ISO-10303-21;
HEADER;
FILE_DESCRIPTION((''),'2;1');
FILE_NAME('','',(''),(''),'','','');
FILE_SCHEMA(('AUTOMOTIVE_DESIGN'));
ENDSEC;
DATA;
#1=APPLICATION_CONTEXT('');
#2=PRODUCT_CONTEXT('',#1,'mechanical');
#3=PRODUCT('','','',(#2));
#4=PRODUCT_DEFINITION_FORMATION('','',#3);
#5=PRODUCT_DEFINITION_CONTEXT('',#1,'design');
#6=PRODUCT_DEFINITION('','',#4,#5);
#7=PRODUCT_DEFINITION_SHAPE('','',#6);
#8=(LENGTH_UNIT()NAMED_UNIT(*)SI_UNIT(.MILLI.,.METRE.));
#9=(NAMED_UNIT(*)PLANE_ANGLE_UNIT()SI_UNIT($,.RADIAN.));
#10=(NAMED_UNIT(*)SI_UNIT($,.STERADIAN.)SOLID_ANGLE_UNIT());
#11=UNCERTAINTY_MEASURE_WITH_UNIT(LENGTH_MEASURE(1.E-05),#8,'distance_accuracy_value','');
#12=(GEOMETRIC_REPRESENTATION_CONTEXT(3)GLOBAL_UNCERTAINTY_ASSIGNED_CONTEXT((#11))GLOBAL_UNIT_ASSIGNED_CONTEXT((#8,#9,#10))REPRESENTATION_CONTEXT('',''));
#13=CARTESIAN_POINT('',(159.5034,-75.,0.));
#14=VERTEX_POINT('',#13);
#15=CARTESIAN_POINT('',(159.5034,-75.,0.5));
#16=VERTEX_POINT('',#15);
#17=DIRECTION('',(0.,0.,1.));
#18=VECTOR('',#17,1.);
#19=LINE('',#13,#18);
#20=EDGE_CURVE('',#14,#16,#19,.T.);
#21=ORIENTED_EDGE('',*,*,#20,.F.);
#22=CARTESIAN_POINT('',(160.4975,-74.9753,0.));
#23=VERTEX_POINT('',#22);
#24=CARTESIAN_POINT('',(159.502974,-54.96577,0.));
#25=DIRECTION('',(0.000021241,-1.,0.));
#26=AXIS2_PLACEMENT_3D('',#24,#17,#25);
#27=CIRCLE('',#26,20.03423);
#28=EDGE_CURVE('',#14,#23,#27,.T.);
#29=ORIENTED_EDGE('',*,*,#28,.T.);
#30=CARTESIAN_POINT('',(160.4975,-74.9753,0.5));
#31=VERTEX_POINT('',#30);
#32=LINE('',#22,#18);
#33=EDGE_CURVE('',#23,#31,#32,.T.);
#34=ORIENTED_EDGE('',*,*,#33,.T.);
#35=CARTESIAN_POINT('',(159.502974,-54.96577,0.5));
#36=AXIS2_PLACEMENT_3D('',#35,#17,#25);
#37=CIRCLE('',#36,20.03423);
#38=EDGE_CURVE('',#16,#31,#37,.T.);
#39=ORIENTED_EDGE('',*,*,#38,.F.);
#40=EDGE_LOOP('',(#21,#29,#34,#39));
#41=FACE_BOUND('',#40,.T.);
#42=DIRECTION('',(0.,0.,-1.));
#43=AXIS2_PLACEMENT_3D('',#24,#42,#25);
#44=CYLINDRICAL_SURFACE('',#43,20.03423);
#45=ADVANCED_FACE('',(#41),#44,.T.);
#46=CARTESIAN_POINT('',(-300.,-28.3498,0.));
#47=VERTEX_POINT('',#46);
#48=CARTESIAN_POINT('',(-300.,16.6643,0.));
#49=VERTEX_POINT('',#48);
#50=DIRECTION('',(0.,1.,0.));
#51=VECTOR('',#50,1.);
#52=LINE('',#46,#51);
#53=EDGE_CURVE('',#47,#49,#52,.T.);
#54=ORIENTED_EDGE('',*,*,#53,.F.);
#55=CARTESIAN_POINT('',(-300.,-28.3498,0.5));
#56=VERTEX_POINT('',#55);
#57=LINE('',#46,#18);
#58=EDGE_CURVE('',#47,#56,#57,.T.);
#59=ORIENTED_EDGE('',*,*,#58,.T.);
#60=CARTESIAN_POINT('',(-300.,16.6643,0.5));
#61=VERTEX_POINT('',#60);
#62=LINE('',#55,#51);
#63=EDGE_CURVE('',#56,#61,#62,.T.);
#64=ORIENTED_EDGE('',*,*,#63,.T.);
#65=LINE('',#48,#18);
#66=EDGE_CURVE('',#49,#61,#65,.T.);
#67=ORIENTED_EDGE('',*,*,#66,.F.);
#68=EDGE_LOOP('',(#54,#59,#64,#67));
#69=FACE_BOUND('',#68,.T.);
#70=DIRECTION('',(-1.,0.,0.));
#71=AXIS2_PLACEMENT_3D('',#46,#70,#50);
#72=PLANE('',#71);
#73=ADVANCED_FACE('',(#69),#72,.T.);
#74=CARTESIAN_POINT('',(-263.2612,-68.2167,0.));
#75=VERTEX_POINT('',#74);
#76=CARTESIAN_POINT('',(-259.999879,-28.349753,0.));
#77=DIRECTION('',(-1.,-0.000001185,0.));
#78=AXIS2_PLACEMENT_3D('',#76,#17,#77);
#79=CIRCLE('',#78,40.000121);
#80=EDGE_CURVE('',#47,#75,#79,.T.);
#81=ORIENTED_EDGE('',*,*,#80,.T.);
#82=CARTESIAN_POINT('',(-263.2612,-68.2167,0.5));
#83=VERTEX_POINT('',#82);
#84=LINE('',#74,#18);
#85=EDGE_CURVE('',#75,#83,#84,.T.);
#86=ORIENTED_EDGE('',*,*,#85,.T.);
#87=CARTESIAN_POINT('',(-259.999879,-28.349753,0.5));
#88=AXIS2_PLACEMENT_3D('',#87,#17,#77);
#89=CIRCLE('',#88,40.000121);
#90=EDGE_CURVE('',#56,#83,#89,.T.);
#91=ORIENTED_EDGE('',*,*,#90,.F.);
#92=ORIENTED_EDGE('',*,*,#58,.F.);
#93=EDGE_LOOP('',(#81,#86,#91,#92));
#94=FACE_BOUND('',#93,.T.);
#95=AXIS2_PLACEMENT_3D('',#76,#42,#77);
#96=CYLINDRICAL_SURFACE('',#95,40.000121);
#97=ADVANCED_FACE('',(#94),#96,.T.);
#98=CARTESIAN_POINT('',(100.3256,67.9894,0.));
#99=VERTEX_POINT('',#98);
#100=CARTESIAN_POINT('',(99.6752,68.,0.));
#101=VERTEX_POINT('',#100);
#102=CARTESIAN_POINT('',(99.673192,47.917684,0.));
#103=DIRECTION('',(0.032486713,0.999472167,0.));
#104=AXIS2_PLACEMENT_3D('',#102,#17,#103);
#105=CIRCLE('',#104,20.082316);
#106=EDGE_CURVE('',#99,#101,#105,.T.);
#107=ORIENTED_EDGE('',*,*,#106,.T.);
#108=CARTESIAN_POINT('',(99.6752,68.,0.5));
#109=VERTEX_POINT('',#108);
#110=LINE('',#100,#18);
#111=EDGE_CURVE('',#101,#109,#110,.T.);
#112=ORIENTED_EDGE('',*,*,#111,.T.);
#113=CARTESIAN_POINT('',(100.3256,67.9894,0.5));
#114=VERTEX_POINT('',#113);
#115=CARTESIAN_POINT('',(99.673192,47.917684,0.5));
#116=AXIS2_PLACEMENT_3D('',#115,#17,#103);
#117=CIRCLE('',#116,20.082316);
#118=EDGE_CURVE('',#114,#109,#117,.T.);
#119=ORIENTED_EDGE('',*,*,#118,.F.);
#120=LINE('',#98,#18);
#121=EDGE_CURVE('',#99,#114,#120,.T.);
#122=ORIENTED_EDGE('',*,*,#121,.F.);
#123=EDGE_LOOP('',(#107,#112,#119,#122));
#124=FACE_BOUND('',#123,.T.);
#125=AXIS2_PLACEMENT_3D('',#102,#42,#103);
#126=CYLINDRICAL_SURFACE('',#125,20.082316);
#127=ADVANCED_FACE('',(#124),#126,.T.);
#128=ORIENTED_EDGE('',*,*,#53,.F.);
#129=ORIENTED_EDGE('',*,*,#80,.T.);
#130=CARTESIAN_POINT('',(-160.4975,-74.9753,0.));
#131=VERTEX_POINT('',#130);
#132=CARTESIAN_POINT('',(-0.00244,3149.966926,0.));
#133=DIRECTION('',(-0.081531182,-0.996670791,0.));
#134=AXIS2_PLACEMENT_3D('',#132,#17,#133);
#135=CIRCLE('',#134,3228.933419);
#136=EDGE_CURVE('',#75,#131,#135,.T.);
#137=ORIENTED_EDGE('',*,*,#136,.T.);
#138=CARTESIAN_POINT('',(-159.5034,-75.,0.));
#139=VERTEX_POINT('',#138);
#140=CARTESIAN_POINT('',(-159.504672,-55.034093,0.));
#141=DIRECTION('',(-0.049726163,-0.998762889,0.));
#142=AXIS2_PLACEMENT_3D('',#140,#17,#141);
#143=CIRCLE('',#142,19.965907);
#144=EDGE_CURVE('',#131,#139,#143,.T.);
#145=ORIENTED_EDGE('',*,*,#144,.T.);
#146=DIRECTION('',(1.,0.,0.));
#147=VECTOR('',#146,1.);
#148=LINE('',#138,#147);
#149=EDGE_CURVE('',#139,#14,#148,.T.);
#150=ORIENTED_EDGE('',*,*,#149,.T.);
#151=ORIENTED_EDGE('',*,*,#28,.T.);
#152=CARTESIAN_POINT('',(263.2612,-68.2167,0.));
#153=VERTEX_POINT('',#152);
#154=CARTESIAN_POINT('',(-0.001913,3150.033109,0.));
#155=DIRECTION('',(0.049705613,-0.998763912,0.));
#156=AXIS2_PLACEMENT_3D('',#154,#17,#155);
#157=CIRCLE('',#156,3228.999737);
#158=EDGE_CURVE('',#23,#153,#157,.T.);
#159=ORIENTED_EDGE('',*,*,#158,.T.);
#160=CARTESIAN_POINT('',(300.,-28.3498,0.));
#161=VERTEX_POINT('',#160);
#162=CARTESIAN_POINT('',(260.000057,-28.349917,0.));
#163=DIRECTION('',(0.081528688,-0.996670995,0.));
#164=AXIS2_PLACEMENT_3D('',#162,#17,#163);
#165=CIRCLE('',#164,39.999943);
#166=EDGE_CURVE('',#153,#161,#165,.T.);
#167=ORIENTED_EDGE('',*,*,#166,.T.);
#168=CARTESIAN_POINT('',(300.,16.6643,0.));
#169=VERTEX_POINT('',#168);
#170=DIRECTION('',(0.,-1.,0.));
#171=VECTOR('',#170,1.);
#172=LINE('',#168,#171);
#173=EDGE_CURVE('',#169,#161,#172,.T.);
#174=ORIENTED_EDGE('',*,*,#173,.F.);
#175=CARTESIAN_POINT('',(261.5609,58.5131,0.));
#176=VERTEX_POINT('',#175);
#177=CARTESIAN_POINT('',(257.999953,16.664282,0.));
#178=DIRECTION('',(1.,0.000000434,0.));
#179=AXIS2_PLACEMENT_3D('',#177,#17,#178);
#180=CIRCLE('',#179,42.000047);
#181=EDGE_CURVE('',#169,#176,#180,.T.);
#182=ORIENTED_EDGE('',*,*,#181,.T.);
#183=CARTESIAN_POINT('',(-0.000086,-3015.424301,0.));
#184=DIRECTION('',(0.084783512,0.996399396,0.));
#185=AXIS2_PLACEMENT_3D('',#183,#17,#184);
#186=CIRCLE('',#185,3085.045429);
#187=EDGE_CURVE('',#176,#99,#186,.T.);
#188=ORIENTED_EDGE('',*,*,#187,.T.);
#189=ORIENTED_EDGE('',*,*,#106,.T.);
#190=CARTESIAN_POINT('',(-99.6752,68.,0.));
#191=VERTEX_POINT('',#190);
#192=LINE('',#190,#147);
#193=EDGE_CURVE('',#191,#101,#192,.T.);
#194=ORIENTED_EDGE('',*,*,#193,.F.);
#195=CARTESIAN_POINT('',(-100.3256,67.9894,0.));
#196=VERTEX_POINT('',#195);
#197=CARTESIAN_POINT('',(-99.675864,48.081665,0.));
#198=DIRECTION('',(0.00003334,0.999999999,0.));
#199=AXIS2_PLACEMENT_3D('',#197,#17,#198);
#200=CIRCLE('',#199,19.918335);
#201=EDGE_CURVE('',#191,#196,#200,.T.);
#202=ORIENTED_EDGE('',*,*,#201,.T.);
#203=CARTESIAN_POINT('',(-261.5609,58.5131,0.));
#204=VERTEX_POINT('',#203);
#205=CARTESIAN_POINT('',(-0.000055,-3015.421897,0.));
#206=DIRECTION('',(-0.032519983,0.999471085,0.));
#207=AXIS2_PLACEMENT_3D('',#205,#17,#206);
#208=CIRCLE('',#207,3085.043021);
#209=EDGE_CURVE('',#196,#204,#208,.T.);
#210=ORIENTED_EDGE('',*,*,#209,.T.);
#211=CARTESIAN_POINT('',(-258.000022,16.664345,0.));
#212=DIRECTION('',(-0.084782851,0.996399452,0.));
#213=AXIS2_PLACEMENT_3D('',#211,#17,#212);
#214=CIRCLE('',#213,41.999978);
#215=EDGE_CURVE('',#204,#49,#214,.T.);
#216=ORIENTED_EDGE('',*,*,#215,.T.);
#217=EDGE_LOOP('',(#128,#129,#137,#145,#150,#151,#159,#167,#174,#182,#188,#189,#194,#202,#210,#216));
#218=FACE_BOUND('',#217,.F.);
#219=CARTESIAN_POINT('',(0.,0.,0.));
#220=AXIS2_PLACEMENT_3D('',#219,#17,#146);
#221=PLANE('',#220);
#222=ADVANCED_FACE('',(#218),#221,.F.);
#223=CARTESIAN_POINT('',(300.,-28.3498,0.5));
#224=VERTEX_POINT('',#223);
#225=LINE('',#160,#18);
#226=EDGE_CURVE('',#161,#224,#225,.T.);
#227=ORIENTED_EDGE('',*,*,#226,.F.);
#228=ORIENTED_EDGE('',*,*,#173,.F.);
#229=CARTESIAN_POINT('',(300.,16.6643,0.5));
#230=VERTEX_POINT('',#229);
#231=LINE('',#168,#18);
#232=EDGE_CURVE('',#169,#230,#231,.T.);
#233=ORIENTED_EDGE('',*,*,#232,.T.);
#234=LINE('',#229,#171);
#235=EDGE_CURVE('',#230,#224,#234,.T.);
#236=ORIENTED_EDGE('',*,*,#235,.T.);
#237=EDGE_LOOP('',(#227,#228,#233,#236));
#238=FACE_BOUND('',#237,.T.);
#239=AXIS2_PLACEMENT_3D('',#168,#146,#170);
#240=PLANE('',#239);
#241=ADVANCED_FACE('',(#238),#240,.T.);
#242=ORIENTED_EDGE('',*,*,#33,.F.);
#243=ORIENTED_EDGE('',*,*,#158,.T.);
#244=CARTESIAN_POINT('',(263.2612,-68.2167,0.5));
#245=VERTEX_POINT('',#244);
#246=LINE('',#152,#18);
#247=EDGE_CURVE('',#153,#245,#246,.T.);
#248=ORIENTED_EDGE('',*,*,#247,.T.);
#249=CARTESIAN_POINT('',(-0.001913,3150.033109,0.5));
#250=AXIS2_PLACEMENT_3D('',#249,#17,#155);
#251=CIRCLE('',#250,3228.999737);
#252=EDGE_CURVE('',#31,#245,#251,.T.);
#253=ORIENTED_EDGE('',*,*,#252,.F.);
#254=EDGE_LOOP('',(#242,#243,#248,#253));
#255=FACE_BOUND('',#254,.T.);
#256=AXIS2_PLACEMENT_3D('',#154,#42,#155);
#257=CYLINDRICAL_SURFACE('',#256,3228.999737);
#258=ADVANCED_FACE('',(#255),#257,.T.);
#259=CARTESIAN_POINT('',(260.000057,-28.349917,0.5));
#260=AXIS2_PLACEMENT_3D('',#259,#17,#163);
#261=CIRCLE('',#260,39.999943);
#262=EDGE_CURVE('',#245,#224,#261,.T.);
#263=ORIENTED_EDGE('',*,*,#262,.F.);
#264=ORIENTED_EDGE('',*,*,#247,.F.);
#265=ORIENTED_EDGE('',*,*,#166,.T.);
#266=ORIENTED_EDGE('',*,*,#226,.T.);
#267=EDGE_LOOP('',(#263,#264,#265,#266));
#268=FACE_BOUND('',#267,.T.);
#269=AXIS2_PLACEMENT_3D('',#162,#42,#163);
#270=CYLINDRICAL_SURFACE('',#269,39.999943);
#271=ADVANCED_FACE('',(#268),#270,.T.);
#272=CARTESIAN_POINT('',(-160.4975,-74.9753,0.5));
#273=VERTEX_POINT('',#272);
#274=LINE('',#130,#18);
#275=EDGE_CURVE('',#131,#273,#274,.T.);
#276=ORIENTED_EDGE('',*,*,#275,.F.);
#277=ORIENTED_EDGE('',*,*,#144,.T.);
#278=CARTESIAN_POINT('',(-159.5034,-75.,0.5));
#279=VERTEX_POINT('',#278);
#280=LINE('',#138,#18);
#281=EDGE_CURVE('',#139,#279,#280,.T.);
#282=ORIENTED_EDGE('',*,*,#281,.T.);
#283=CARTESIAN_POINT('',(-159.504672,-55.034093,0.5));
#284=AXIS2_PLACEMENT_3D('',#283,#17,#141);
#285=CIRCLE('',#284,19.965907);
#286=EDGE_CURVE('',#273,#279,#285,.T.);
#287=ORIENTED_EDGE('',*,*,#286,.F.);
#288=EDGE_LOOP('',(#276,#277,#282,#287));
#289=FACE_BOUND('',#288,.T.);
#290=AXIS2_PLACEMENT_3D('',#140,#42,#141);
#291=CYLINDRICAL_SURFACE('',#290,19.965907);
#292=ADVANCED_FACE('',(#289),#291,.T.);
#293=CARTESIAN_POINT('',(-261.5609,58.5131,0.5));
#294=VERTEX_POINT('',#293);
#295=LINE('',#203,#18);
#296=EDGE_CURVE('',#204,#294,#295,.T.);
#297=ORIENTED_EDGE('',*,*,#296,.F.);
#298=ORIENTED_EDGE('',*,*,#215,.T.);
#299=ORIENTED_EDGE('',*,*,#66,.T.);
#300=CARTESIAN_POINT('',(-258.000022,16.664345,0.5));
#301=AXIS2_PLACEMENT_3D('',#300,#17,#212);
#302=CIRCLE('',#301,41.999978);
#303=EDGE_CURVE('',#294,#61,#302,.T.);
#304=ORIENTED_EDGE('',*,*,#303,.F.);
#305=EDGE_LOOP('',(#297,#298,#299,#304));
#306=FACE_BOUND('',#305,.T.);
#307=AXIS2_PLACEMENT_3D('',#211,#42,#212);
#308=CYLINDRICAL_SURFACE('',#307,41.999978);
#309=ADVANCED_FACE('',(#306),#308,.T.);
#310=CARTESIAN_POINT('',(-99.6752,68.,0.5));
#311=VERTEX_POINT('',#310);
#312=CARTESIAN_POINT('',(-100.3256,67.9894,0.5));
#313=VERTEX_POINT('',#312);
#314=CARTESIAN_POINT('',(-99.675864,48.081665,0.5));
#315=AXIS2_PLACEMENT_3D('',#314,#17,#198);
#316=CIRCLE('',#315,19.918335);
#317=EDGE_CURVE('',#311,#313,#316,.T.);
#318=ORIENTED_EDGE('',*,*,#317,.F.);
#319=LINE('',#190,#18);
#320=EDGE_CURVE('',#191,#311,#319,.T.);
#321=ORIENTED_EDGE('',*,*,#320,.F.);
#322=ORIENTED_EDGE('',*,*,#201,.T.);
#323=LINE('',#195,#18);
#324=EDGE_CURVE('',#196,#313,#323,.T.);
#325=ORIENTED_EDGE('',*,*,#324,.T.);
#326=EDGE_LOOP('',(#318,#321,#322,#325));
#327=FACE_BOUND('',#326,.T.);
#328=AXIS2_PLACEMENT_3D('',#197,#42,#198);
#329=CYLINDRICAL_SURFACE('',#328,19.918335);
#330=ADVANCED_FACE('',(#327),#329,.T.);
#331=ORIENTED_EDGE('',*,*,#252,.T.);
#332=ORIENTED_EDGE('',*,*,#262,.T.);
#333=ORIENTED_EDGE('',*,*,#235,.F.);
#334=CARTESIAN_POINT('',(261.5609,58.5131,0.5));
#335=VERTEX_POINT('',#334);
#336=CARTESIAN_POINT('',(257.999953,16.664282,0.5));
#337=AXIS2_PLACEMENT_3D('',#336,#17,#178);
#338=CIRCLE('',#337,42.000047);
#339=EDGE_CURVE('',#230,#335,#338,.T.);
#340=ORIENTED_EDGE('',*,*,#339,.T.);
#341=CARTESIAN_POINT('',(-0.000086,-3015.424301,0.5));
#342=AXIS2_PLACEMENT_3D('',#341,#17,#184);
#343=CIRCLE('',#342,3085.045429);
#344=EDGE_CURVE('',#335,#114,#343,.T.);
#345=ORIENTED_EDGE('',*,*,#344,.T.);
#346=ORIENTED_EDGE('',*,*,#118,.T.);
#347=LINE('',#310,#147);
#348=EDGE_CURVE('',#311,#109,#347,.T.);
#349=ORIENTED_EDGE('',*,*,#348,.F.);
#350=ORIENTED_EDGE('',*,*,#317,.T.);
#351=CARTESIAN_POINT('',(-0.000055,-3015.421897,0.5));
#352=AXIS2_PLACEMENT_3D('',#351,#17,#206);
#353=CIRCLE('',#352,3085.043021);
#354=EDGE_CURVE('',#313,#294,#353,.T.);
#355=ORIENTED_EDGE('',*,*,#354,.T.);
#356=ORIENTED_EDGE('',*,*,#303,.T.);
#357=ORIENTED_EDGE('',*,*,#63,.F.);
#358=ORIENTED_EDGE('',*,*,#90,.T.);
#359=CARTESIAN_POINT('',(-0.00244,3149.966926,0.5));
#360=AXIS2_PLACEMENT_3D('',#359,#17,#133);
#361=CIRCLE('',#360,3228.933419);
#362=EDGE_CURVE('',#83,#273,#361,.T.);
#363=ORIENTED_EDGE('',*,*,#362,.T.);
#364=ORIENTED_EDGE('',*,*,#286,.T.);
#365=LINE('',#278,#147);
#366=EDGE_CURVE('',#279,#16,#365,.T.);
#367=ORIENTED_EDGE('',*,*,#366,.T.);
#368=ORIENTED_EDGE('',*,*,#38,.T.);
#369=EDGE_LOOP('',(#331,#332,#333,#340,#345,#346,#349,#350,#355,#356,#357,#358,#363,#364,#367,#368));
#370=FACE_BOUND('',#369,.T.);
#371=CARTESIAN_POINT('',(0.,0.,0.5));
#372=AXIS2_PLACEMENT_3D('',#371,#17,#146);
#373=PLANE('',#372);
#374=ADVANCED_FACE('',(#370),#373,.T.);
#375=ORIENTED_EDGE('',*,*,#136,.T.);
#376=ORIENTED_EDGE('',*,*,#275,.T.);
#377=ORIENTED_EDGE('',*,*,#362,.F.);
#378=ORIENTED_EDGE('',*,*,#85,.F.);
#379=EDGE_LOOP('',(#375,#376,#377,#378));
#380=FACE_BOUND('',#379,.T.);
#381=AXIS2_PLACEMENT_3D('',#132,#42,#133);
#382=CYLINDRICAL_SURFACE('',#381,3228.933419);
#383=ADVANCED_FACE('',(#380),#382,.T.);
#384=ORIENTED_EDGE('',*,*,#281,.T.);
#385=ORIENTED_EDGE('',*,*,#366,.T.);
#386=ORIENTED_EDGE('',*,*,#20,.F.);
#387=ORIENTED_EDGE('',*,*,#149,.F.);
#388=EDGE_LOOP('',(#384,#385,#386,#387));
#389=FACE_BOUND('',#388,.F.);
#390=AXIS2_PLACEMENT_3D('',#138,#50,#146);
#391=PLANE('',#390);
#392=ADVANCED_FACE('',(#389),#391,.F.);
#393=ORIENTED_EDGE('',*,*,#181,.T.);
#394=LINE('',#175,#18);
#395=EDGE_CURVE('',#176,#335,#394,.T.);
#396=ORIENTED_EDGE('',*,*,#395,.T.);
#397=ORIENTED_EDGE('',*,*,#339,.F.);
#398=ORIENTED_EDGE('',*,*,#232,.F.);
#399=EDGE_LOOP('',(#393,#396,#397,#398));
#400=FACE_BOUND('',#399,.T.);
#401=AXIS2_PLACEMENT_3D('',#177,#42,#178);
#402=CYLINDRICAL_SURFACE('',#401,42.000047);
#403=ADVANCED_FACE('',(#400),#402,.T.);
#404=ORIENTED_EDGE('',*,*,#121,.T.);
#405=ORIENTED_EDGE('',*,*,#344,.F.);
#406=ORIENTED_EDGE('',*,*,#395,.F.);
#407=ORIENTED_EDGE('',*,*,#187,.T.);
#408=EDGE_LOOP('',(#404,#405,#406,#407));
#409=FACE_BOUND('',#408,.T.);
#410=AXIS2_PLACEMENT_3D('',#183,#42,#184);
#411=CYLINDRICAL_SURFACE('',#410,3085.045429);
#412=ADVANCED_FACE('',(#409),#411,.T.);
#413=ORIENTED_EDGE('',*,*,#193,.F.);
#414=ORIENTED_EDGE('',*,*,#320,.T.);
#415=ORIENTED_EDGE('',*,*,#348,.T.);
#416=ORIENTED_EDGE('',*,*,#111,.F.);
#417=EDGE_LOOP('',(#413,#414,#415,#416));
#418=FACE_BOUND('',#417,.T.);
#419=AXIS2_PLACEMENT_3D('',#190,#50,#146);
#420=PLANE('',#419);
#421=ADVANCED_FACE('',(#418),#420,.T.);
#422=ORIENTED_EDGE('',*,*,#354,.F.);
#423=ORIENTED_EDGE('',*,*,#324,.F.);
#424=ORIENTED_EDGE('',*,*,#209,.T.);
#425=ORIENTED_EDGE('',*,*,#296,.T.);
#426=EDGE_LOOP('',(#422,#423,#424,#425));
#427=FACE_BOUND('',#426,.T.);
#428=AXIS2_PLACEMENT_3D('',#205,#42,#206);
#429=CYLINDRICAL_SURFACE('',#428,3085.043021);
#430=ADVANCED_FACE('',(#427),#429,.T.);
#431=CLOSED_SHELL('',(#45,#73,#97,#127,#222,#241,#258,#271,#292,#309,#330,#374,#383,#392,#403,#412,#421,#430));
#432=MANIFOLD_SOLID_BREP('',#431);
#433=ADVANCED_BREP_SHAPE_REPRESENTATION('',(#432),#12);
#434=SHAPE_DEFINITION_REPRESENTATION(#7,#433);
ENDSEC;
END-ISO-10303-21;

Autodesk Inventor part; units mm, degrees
ref_plane "YZ Plane" through (0, 0, 0) normal (1, 0, 0) x (0, 1, 0)
ref_plane "XZ Plane" through (0, 0, 0) normal (0, 1, 0) x (-1, 0, 0)
ref_plane "XY Plane" through (0, 0, 0) normal (0, 0, 1) x (1, 0, 0)
sketch "Clock Front Face Outline" plane through (0, 0, 0) normal (0, 0, 1) x (1, 0, 0)
  arc A0 (261.5609, 58.5131) -> (100.3256, 67.9894) centre (0, -3015.4231) ccw
  arc A1 (-100.3256, 67.9894) -> (-261.5609, 58.5131) centre (0, -3015.4231) ccw
  line L0 (-159.5034, -75) -> (159.5034, -75)
  arc A2 (-263.2612, -68.2167) -> (-160.4975, -74.9753) centre (0, 3150) ccw
  arc A3 (160.4975, -74.9753) -> (263.2612, -68.2167) centre (0, 3150) ccw
  arc A4 (300, 16.6643) -> (261.5609, 58.5131) centre (258, 16.6643) ccw
  arc A5 (263.2612, -68.2167) -> (300, -28.3498) centre (260, -28.3498) ccw
  arc A6 (-300, -28.3498) -> (-263.2612, -68.2167) centre (-260, -28.3498) ccw
  arc A7 (-261.5609, 58.5131) -> (-300, 16.6643) centre (-258, 16.6643) ccw
  arc A8 (-99.6752, 68) -> (-100.3256, 67.9894) centre (-99.6752, 48) ccw
  arc A9 (100.3256, 67.9894) -> (99.6752, 68) centre (99.6752, 48) ccw
  arc A10 (159.5034, -75) -> (160.4975, -74.9753) centre (159.5034, -55) ccw
  arc A11 (-160.4975, -74.9753) -> (-159.5034, -75) centre (-159.5034, -55) ccw
  line L1 (-99.6752, 68) -> (99.6752, 68)
  line L2 (300, 16.6643) -> (300, -28.3498)
  line L3 (-300, -28.3498) -> (-300, 16.6643)
  point P0 (0, -2.2582)
  point P1 (-300, 55)
  point P2 (300, 55)
  point P3 (-300, -65)
  point P4 (300, -65)
  point P5 (-160, -75)
  point P6 (160, -75)
  point P7 (-100, 68)
  point P8 (100, 68)
  dimension "d0" = 600
  dimension "d1" = 120
  dimension "d2" = 120
  dimension "d3" = 140
  dimension "d4" = 140
  dimension "d5" = 200
  dimension "d6" = 200
  dimension "d7" = 200
  dimension "d8" = 320
  dimension "d9" = 143
  dimension "d10" = 10
  dimension "d11" = 10
  dimension "d12" = 13
  dimension "d13" = 13
  dimension "d14" = 42
  dimension "d15" = 40
  dimension "d16" = 40
  dimension "d17" = 42
  dimension "d18" = 20
sketch "Sketch1" plane through (0, 0, 0) normal (0, 0, 1) x (1, 0, 0)
  arc A0 (261.5609, 58.5131) -> (100.3256, 67.9894) centre (0, -3015.4231) ccw
  arc A1 (-100.3256, 67.9894) -> (-261.5609, 58.5131) centre (0, -3015.4231) ccw
  line L0 (-159.5034, -75) -> (159.5034, -75)
  arc A2 (-263.2612, -68.2167) -> (-160.4975, -74.9753) centre (0, 3150) ccw
  arc A3 (160.4975, -74.9753) -> (263.2612, -68.2167) centre (0, 3150) ccw
  arc A4 (300, 16.6643) -> (261.5609, 58.5131) centre (258, 16.6643) ccw
  arc A5 (263.2612, -68.2167) -> (300, -28.3498) centre (260, -28.3498) ccw
  arc A6 (-300, -28.3498) -> (-263.2612, -68.2167) centre (-260, -28.3498) ccw
  arc A7 (-261.5609, 58.5131) -> (-300, 16.6643) centre (-258, 16.6643) ccw
  arc A8 (-99.6752, 68) -> (-100.3256, 67.9894) centre (-99.6752, 48) ccw
  arc A9 (100.3256, 67.9894) -> (99.6752, 68) centre (99.6752, 48) ccw
  arc A10 (159.5034, -75) -> (160.4975, -74.9753) centre (159.5034, -55) ccw
  arc A11 (-160.4975, -74.9753) -> (-159.5034, -75) centre (-159.5034, -55) ccw
  line L1 (-99.6752, 68) -> (99.6752, 68)
  line L2 (300, 16.6643) -> (300, -28.3498)
  line L3 (-300, -28.3498) -> (-300, 16.6643)
  point P0 (0, 0)
  point P1 (0, 0)
  dimension "d19" = 300
  dimension "d20" = 75
extrude "Extrusion1" add sketch "Sketch1" along normal blind 0.5
properties part number "7 Segment Clock Blanking Plate" material "PMMA PlasticBlack"
